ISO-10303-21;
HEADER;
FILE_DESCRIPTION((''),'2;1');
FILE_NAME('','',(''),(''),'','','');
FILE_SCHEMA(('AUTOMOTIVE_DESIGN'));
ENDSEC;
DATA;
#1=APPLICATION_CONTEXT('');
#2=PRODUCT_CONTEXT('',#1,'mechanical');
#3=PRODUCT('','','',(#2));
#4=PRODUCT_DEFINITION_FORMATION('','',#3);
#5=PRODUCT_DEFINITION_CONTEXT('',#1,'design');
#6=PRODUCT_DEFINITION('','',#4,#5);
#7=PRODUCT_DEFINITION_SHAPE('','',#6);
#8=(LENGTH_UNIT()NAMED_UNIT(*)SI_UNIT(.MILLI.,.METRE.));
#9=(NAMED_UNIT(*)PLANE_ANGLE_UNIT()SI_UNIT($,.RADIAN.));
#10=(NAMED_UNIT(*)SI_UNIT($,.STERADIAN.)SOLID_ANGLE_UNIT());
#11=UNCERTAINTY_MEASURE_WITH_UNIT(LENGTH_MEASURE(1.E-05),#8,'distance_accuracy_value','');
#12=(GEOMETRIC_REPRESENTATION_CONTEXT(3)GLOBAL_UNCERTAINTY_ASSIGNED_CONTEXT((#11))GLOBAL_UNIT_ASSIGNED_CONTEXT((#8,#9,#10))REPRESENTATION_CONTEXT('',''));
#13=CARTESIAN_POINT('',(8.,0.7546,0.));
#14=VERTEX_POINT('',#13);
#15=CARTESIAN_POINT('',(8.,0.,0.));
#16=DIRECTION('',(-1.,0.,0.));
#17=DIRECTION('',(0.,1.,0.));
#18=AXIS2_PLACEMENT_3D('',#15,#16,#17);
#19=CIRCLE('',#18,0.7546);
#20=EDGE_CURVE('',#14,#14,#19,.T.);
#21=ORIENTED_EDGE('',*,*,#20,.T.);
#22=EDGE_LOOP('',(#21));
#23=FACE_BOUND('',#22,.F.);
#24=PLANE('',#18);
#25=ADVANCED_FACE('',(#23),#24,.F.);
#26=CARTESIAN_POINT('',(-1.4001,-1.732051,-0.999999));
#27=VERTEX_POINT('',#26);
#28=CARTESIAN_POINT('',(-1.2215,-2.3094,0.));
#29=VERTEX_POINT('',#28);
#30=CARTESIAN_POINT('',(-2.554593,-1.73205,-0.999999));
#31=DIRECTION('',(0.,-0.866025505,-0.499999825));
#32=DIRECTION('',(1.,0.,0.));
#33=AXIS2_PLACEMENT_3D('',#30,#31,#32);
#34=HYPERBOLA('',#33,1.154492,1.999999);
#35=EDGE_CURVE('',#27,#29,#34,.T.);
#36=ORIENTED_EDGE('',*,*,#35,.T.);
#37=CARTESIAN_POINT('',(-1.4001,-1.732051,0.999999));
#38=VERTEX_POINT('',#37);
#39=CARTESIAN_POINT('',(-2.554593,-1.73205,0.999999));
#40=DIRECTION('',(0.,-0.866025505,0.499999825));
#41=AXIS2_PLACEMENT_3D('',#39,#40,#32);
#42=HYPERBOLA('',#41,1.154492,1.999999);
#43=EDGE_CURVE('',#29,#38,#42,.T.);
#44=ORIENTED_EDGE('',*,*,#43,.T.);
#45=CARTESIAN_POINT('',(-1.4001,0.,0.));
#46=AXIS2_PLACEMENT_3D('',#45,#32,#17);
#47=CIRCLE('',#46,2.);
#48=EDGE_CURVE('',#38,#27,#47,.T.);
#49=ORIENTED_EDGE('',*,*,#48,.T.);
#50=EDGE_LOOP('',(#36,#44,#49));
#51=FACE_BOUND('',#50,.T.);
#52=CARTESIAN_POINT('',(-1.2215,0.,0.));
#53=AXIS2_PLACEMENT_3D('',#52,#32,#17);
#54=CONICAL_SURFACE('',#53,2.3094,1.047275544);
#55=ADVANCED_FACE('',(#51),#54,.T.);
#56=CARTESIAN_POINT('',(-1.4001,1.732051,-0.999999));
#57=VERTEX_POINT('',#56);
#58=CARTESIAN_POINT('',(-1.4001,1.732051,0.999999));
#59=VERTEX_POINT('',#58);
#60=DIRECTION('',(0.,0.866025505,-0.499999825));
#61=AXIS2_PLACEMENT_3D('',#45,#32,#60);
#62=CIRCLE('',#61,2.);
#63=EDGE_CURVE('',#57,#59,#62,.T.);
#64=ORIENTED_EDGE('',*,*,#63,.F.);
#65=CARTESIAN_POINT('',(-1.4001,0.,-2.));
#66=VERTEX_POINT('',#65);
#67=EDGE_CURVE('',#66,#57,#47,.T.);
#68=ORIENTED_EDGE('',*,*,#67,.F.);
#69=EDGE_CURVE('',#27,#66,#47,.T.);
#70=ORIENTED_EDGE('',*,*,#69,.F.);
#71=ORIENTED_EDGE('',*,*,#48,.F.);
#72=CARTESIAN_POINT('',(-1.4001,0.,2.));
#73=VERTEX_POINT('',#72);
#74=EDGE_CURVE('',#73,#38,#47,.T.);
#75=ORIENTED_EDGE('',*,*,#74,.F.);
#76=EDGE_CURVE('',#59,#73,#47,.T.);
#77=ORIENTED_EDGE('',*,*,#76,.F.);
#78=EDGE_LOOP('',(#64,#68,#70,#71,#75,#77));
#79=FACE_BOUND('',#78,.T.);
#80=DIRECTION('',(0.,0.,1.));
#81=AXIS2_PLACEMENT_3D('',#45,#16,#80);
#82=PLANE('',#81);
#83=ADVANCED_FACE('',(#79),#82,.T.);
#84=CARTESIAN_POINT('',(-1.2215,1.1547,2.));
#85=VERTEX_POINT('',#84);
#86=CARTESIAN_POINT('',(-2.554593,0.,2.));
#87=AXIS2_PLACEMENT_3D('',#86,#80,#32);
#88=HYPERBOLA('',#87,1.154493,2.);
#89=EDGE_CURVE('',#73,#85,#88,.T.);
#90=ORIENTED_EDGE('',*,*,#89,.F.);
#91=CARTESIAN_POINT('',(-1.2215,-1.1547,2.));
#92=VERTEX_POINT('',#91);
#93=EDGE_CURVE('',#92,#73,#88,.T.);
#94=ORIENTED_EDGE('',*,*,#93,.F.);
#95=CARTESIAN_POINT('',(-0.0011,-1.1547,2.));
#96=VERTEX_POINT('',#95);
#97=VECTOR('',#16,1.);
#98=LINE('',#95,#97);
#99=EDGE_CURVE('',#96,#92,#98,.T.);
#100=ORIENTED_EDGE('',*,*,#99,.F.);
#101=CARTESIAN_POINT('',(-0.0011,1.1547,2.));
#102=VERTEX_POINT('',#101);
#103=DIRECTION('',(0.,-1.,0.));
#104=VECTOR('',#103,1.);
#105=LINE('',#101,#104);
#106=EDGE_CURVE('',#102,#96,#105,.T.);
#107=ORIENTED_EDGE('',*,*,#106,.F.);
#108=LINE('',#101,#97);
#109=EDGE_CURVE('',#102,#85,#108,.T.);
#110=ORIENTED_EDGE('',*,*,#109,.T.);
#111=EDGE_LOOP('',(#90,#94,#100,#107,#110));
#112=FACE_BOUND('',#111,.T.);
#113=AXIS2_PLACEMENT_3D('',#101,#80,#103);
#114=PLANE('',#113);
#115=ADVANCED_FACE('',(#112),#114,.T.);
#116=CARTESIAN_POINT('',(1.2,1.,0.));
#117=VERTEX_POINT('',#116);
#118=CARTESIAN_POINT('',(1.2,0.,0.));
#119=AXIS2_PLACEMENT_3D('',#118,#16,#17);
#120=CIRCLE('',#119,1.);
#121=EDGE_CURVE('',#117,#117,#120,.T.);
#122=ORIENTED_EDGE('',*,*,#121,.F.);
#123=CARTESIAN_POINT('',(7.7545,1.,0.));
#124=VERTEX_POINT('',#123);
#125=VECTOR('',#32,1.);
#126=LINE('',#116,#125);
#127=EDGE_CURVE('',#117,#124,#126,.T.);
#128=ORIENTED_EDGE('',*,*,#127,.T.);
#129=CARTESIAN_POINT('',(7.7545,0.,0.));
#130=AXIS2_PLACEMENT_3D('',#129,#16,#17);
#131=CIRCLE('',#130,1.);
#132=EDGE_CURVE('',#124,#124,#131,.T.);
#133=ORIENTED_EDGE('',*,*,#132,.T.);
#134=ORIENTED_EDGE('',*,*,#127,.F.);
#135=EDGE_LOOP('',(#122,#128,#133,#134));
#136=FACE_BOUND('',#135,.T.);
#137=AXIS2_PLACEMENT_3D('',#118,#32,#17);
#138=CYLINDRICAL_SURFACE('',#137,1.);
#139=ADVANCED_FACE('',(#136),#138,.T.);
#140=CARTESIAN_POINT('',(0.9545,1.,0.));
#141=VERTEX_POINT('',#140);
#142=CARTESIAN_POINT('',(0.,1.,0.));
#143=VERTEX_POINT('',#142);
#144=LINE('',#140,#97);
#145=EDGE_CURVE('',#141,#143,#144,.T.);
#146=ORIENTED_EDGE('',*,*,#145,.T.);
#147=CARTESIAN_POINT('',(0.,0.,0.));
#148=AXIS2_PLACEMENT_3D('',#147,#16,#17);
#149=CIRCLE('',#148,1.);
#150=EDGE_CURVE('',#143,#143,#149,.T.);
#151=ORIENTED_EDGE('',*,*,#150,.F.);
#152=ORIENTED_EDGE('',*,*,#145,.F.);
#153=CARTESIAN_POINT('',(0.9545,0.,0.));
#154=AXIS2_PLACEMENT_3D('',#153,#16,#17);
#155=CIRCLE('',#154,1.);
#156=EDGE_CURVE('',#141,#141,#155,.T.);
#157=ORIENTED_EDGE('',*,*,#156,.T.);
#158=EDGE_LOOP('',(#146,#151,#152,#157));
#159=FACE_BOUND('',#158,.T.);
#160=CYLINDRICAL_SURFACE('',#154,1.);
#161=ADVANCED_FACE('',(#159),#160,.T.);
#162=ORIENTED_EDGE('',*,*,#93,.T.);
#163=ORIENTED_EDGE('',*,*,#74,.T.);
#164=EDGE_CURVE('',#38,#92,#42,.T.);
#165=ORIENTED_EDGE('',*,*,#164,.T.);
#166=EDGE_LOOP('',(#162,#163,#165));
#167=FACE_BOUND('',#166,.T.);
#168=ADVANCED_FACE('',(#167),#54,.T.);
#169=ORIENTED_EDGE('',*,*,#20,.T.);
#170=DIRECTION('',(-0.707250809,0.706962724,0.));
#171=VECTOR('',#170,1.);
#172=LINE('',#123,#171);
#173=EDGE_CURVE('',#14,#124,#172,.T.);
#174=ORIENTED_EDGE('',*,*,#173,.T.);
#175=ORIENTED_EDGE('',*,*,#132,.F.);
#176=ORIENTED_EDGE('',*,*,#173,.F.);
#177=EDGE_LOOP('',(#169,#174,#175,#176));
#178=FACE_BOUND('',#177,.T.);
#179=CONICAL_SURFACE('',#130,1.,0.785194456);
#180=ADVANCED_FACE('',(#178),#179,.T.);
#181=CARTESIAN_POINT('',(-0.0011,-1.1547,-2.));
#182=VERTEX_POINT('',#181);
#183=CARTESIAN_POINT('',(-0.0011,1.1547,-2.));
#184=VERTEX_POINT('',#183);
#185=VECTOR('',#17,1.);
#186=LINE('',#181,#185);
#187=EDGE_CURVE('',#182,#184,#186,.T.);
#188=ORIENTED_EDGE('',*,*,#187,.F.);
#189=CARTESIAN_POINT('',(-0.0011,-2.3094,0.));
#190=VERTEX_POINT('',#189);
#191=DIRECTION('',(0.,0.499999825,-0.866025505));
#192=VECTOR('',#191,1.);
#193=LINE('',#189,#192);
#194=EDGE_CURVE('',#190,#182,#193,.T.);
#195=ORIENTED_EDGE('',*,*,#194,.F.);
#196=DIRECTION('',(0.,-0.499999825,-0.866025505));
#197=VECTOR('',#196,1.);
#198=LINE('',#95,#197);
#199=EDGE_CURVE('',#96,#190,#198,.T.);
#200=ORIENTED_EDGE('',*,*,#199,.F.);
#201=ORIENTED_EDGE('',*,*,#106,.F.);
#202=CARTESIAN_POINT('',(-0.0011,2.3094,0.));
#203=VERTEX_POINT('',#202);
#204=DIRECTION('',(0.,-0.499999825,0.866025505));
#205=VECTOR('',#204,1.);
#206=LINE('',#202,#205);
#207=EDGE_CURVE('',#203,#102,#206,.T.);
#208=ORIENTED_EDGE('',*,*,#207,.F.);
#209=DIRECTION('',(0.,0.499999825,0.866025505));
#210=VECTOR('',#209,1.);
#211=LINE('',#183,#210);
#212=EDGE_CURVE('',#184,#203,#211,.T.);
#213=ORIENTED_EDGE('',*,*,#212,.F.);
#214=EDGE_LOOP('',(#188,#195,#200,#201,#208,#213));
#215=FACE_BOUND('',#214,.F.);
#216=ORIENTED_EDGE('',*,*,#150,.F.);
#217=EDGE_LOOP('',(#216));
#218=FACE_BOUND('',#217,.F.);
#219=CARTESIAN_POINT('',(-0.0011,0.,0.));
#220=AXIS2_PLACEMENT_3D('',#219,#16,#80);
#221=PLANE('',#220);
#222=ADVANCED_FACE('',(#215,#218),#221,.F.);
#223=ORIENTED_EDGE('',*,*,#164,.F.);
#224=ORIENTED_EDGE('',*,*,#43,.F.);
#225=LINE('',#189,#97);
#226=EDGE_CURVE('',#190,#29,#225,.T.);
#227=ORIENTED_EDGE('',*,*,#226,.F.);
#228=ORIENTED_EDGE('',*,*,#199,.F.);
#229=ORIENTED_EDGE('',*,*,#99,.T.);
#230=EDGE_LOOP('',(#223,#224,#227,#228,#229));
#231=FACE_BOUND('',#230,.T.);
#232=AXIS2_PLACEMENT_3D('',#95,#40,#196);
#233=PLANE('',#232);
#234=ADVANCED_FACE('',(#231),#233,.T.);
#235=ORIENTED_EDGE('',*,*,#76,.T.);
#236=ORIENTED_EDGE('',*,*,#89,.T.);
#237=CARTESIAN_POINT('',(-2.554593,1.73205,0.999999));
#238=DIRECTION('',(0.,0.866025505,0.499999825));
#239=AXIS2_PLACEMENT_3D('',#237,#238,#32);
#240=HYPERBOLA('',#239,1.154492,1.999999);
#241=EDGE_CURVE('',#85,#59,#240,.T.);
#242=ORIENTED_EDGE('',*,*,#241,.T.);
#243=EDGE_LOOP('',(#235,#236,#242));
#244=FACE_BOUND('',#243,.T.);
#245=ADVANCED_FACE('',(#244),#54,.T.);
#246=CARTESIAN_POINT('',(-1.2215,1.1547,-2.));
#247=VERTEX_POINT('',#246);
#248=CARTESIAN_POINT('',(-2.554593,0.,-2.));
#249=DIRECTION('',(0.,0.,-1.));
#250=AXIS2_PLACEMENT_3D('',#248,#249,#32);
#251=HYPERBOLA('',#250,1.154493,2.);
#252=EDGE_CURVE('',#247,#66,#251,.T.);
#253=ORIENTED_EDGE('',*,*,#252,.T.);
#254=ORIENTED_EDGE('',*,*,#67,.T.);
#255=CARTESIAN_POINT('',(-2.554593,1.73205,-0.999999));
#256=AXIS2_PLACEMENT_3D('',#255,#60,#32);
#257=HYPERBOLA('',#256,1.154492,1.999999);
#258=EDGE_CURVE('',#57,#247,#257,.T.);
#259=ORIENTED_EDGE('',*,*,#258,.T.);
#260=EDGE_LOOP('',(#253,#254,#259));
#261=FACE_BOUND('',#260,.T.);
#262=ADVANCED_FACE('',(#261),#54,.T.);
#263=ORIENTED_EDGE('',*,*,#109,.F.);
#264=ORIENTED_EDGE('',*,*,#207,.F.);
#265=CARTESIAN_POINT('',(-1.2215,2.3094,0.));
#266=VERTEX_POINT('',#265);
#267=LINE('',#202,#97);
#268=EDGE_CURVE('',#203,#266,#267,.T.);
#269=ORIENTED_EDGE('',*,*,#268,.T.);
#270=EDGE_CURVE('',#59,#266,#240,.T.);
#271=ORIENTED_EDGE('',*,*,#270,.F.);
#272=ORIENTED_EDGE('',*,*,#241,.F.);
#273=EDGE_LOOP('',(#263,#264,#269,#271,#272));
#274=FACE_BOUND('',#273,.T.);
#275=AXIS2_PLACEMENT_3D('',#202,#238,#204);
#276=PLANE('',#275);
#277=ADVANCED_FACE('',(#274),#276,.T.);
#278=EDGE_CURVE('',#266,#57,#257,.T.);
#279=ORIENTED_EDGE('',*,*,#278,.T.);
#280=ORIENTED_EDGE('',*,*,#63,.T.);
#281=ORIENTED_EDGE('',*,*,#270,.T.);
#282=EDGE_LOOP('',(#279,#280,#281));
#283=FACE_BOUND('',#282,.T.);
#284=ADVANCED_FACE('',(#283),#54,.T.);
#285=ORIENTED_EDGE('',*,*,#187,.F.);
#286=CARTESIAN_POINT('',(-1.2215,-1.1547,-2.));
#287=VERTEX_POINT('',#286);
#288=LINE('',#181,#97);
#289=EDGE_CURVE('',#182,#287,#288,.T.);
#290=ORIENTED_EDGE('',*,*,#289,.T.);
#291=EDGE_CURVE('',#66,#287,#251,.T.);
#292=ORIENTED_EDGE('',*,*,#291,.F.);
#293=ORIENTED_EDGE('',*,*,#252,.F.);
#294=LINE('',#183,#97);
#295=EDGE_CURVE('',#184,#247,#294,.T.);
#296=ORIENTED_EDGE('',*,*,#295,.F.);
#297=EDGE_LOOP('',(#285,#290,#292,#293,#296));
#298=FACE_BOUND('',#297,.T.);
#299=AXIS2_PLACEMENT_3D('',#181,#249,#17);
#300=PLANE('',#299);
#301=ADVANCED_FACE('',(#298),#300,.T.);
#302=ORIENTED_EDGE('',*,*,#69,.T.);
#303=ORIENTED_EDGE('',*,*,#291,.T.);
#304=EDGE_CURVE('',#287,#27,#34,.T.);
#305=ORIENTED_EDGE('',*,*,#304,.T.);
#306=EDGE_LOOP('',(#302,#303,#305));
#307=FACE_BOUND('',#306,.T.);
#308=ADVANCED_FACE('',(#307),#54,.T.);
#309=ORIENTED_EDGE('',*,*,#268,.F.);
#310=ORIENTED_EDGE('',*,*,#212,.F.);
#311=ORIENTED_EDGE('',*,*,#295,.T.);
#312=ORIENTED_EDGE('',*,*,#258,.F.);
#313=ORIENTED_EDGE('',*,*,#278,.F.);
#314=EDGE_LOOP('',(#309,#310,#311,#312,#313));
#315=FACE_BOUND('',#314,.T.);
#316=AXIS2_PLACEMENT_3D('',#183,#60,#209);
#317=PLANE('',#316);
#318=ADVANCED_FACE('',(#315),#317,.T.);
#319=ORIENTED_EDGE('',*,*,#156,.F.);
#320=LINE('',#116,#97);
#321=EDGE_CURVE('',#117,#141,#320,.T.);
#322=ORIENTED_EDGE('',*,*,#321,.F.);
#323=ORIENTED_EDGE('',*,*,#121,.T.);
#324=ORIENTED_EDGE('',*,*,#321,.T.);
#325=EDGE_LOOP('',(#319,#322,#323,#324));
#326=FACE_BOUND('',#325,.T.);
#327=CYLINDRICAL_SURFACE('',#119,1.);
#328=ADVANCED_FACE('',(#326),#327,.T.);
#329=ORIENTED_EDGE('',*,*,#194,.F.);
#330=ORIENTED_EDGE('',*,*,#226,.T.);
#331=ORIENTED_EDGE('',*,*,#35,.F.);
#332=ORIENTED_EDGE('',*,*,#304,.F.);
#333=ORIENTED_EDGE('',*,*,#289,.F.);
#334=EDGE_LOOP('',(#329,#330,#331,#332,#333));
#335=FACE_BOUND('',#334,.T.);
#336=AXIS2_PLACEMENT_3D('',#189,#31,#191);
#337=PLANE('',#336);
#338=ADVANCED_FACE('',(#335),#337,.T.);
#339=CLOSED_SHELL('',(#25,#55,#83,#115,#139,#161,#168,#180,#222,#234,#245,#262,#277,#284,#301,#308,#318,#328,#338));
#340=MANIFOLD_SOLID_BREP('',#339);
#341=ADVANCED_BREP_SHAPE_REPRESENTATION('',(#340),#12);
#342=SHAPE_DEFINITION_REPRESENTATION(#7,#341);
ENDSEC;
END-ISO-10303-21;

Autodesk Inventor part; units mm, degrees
ref_plane "YZ Plane" through (0, 0, 0) normal (1, 0, 0) x (0, 1, 0)
ref_plane "XZ Plane" through (0, 0, 0) normal (0, 1, 0) x (-1, 0, 0)
sketch "Sketch1" plane through (0, 0, 0) normal (0, 0, 1) x (1, 0, 0)
  line L0 (0, 2) -> (0, 1)
  line L1 (1.2, 1) -> (8, 1)
  line L2 (8, 1) -> (8, 0)
  line L3 (8, 0) -> (-0.0011, 0)
  line L4 (-1.6013, 0) -> (9.6002, 0) projected
  line L5 (-0.0011, 0) -> (-0.0011, 2)
  line L6 (-0.0011, 2) -> (0, 2)
  line L7 (1.2, 1) -> (0.9545, 1)
  line L8 (0.9545, 1) -> (0, 1)
  line L9 (0, -0.4) -> (0, 2.4) projected
  dimension "d0" = 8
  dimension "d1" = 6.8
  dimension "d2" = 2
  dimension "d9" = 0.0011
  dimension "d10" = 4
  dimension "d13" = 0.2455
  dimension "d14" = 2
revolve "Body" add sketch "Sketch1" angle 360 about axis through (8, 0, 0) along (-1, 0, 0)
sketch "Sketch2" plane through (-0.0011, 0, 0) normal (-1, 0, 0) x (0, 0, 1)
  line L0 (0, 2.3094) -> (2, 1.1547)
  line L1 (2, 1.1547) -> (2, -1.1547)
  line L2 (2, -1.1547) -> (0, -2.3094)
  line L3 (0, -2.3094) -> (-2, -1.1547)
  line L4 (-2, -1.1547) -> (-2, 1.1547)
  line L5 (-2, 1.1547) -> (0, 2.3094)
  point P0 (0, 0)
  point P1 (0, 0)
  dimension "d11" = 4
extrude "Head" add sketch "Sketch2" along normal blind 1.399
sketch "Sketch4" plane through (0, 0, 0) normal (0, 0, 1) x (1, 0, 0)
  line L0 (-1.4001, 2) -> (-1.4001, 2.3094)
  line L1 (-1.4001, 2.3094) -> (-1.2215, 2.3094)
  line L2 (-1.2215, 2.3094) -> (-1.4001, 2)
  line L3 (-1.6799, 0) -> (0.2787, 0) projected
  line L4 (-0.0011, 2.3094) -> (-1.4001, 2.3094) projected
  line L5 (-1.4001, 1.1547) -> (-1.4001, 2.3094) projected
  dimension "d5" = 30
  dimension "d19" = 4
revolve "Chamfer1" cut sketch "Sketch4" angle 360 about axis through (-10, 0, 0) along (1, 0, 0)
thread "Thread" size "M2x0.4" class "6g" standard "ISO Metric profile" length 6.8
chamfer "Chamfer2" distance 0.2454 distance2 0.2455 1 edges at (8, -1, 0) measured on face at (8, 0.2635, -0.5751)
ref_plane "Work Plane1" through (1.525, 0, 0) normal (0, 0, 1) x (1, 0, 0)
equation "\"d11\" = SW"
equation "\"d3\" = KOH - SD"
equation "\"d15\" = GEL"
equation "\"d6\" = -0.5 * SPD + 0.5 * GD"
equation "\"d0\" = NLG"
equation "\"d1\" = GEL"
equation "\"d2\" = GD"
equation "\"d10\" = SD2"
equation "\"d14\" = BDM"
equation "\"d5\" = ANG1"
equation "\"d19\" = SW0"
equation "\"NLG\" = 8"
equation "\"GD\" = NND"
equation "\"BDM\" = NND"
equation "\"KOH\" = 1.4"
equation "\"GEL\" = 6.8"
equation "\"SW\" = 4"
equation "\"SW0\" = SW"
equation "\"SPD\" = NND - 1.2269 * PTC"
equation "\"SD2\" = SW"
equation "\"SD\" = 0.001"
equation "\"ANG1\" = 30deg"
equation "\"GAL\" = 0.61345 * PTC"
equation "\"GUL\" = 0.61345 * PTC"
equation "\"RR\" = 0.001"
equation "\"WFT\" = SD"
equation "\"GD1\" = THREADDIA - 1.2269 * PTC"
equation "\"THREADDIA\" = 2"
equation "\"SDH\" = SW"
equation "\"TOA\" = 30deg"
equation "\"FAWI\" = 45deg"
equation "\"PTC\" = 0.4"
equation "\"NND\" = 2"
equation "\"E0\" = 1.155 * SW"
properties part number "AS 1110 - M2 x 8" material "Steel, Mild"
